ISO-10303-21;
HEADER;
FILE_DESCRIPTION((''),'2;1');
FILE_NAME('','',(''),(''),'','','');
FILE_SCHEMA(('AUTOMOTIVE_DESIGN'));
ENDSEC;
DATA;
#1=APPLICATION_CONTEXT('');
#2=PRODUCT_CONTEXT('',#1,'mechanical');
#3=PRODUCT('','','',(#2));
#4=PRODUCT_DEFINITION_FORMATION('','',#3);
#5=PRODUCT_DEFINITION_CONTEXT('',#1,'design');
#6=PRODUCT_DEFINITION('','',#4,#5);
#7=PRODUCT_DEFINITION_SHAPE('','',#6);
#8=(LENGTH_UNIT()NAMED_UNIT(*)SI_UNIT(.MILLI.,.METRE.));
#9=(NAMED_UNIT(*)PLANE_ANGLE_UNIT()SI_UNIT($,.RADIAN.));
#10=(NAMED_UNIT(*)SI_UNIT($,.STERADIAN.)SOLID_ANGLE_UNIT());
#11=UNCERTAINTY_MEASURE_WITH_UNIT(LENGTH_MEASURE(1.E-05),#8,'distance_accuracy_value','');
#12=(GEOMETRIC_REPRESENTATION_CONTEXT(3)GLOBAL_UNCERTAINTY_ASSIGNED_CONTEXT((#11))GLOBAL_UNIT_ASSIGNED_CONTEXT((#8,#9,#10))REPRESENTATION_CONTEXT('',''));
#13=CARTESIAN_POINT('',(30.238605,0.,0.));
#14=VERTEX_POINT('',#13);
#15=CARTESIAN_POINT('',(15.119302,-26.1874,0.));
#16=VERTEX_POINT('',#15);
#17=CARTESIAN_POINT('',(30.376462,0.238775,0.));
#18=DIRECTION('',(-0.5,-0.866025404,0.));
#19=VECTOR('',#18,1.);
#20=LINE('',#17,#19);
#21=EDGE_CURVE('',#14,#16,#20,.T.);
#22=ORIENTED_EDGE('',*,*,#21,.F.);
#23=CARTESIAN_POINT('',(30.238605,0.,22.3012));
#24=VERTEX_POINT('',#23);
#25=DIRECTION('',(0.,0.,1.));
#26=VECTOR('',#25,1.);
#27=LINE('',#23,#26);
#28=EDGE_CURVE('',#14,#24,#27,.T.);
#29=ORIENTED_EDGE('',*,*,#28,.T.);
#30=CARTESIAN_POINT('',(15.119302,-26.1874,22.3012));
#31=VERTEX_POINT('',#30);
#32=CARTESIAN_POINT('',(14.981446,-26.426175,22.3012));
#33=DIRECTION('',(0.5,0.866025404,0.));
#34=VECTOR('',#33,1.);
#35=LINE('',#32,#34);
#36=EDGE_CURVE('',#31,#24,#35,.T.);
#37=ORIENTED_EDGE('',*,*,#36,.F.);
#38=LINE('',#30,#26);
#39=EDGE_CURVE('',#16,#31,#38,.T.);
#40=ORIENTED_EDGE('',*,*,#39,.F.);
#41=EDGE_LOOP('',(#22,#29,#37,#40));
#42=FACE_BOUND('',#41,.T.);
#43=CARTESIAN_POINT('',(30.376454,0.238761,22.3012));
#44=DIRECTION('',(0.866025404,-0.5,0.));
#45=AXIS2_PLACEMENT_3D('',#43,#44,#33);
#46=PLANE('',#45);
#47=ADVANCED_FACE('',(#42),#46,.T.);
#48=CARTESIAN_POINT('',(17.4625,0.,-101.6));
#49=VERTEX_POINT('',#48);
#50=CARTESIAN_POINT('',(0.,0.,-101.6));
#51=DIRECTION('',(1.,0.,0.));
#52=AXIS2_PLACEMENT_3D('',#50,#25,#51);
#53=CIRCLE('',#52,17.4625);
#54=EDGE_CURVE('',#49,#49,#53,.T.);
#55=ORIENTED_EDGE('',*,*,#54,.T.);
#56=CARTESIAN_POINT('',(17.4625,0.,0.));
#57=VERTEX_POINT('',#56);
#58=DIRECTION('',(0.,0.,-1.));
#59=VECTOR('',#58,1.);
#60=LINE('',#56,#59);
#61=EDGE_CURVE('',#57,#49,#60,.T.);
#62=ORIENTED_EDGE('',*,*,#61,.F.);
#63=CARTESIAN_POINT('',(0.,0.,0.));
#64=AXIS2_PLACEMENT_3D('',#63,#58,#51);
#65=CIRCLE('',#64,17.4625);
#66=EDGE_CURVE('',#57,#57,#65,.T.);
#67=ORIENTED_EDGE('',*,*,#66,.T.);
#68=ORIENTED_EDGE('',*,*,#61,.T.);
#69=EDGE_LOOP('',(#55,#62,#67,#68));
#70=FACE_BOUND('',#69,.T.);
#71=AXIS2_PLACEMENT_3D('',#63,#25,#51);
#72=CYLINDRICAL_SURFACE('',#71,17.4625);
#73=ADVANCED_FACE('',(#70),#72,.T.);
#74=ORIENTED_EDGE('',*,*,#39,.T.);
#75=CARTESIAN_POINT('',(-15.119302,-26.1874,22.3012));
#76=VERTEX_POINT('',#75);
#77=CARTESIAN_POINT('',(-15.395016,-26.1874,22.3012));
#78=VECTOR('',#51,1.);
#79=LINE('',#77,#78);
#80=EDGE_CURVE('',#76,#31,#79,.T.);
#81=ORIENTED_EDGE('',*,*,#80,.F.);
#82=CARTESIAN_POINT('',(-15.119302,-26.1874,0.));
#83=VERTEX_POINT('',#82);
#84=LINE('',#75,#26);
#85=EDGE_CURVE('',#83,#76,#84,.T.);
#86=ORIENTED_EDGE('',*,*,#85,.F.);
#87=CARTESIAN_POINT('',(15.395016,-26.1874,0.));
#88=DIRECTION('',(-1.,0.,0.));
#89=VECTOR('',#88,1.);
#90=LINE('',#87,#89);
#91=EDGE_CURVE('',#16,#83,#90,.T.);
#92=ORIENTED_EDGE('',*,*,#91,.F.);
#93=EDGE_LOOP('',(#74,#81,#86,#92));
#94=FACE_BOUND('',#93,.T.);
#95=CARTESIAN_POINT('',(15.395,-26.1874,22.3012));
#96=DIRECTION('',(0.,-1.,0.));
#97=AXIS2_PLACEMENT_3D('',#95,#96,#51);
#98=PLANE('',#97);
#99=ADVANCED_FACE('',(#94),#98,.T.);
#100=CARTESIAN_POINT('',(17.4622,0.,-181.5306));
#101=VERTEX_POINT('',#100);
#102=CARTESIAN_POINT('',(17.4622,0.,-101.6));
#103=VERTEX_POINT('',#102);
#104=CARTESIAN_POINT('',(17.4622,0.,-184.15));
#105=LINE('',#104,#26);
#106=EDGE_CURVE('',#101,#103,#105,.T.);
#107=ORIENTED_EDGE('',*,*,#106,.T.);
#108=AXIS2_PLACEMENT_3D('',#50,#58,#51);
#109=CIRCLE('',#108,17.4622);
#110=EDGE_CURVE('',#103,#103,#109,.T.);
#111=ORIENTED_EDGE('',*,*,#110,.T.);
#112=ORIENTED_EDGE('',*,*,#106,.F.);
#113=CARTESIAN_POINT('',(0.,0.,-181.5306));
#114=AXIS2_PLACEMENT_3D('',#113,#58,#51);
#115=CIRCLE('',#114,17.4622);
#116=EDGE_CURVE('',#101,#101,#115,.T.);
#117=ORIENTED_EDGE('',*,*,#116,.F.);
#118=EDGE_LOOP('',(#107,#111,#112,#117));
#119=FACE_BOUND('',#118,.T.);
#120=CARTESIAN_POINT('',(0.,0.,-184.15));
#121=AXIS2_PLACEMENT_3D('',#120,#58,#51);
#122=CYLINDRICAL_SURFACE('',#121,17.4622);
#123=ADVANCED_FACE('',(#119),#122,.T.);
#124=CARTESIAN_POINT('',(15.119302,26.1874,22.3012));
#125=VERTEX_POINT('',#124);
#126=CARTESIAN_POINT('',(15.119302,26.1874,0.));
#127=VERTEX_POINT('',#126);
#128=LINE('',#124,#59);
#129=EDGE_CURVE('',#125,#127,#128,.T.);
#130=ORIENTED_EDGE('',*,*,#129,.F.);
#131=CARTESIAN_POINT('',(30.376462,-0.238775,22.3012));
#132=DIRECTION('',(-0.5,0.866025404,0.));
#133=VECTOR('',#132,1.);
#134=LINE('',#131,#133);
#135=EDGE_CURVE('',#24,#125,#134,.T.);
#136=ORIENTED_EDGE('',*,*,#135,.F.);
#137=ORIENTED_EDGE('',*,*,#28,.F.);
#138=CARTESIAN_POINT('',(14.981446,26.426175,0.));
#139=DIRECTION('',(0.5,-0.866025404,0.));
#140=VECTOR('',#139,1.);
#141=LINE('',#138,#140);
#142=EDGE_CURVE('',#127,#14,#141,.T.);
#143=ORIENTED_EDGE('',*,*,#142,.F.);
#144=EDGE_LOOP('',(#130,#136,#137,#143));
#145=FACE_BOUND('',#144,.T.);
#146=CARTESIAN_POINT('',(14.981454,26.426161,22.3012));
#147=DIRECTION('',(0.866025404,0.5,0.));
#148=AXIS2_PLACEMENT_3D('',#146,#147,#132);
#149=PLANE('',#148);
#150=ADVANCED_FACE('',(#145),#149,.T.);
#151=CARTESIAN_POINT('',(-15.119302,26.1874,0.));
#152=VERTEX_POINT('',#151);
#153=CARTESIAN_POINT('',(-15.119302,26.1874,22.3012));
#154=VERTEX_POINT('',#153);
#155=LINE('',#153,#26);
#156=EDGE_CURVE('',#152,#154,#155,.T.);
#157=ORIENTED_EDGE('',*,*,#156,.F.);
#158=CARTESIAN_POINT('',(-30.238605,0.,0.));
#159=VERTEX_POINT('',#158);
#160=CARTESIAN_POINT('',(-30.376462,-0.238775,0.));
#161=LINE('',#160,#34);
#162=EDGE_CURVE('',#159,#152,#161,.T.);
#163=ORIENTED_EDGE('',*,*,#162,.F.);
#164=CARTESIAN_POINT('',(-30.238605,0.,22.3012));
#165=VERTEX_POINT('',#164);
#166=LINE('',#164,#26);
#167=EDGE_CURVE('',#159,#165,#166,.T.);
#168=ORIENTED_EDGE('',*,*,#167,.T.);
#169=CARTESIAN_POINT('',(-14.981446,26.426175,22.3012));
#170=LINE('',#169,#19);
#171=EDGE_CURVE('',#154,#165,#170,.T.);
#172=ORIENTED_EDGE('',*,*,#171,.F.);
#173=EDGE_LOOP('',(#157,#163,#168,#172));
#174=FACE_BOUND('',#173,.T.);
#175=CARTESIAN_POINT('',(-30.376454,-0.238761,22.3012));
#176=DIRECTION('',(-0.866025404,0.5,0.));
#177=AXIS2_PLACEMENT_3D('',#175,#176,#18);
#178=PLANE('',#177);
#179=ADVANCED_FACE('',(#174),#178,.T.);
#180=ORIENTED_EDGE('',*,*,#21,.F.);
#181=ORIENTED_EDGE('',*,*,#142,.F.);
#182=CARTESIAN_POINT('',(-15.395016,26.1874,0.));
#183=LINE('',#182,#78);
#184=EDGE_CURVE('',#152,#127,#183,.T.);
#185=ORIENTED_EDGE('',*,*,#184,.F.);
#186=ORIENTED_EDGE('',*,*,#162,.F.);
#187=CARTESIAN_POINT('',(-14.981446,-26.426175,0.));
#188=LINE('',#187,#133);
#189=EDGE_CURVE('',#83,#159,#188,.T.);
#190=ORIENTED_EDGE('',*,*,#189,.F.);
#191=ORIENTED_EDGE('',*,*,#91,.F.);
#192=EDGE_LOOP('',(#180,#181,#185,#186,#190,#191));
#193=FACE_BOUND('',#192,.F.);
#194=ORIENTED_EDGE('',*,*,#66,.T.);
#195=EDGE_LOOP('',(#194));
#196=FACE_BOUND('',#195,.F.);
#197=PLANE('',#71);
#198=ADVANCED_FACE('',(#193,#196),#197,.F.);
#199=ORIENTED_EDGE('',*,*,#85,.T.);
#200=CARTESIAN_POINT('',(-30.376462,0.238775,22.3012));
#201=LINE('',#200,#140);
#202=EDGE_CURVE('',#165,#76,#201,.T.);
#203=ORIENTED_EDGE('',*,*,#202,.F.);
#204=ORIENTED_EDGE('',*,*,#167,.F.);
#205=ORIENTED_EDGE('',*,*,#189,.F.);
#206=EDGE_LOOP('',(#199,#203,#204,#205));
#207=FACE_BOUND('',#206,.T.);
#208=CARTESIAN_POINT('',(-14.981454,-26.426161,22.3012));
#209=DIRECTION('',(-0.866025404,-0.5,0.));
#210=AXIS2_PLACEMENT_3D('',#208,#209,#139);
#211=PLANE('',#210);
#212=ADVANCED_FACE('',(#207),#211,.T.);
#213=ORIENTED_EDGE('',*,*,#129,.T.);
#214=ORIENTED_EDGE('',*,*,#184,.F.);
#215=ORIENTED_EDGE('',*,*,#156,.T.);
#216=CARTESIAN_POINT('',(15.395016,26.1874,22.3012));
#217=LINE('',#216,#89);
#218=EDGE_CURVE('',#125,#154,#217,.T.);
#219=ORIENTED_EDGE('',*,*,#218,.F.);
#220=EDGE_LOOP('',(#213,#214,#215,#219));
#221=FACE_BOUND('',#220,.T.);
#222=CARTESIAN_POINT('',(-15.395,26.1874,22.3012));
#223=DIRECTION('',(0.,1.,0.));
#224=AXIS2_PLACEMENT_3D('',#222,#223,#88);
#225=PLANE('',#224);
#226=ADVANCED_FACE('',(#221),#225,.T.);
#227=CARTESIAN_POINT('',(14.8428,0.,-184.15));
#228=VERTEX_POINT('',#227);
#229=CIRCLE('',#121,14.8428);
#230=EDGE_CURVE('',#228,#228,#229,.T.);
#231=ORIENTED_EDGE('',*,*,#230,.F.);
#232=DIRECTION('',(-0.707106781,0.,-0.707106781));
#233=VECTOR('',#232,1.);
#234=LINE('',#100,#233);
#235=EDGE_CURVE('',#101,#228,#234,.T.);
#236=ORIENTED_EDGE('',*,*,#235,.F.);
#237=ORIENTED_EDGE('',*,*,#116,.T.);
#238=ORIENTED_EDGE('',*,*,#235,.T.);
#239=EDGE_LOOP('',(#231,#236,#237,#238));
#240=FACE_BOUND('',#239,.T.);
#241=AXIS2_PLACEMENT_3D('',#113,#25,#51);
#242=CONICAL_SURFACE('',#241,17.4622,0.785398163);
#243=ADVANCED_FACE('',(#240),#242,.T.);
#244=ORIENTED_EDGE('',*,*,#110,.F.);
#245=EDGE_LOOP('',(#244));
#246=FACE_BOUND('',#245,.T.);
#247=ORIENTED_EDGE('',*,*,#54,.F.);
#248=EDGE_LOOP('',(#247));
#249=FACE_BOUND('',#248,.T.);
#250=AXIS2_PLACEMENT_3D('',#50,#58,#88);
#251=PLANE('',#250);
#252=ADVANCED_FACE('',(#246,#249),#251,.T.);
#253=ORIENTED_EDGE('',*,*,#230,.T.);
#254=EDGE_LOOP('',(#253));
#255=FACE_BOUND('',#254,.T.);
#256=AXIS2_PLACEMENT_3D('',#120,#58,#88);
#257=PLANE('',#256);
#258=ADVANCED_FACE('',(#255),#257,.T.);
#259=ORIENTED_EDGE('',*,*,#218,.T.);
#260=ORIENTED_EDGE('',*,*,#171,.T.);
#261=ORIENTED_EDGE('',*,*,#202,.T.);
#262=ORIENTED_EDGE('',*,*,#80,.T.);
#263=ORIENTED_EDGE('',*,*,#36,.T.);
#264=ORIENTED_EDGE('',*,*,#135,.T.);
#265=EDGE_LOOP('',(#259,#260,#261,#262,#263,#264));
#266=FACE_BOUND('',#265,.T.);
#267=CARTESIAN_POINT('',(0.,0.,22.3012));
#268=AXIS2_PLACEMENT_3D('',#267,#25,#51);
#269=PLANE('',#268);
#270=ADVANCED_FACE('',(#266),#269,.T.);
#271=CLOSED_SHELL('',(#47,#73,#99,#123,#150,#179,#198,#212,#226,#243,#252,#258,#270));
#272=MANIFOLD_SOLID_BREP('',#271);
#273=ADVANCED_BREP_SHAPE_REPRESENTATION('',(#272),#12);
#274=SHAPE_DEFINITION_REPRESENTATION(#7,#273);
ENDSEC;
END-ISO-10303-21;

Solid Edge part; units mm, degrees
sketch "Sketch1" plane through (0, 0, 0) normal (0, 0, 1) x (1, 0, 0)
  circle A0 centre (0, 0) radius 30.3774
  dimension "D1" = 60.7548
extrude "Protrusion1" add sketch "Sketch1" along normal blind 22.3012
sketch "Sketch2" plane through (0, 0, 0) normal (0, 0, -1) x (1, 0, 0)
  circle A0 centre (0, 0) radius 17.4625
extrude "Protrusion2" add sketch "Sketch2" along normal blind 184.15
sketch "Sketch3" plane through (0, 0, -184.15) normal (0, 0, -1) x (1, 0, 0)
  circle A0 centre (0, 0) radius 17.4622
extrude "Cutout1" cut sketch "Sketch3" against normal blind 82.55 flip side to cut
chamfer "Chamfer_1" distance 2.6194 angle 45 1 edges at (-17.4622, 0, -184.15)
sketch "Sketch4" plane through (0, 0, 22.3012) normal (0, 0, 1) x (1, 0, 0)
  line L0 (-15.395, 26.1874) -> (15.395, 26.1874)
  dimension "D1" = 52.3748
extrude "Cutout2" cut sketch "Sketch4" against normal up to next material side at (0, 26.2374, 22.3012)
pattern_circular "Pattern1" count 6 over 360 about axis through (0, 0, 22.3012) along (0, 0, 1) of "Cutout2"
properties part number "24106686"
